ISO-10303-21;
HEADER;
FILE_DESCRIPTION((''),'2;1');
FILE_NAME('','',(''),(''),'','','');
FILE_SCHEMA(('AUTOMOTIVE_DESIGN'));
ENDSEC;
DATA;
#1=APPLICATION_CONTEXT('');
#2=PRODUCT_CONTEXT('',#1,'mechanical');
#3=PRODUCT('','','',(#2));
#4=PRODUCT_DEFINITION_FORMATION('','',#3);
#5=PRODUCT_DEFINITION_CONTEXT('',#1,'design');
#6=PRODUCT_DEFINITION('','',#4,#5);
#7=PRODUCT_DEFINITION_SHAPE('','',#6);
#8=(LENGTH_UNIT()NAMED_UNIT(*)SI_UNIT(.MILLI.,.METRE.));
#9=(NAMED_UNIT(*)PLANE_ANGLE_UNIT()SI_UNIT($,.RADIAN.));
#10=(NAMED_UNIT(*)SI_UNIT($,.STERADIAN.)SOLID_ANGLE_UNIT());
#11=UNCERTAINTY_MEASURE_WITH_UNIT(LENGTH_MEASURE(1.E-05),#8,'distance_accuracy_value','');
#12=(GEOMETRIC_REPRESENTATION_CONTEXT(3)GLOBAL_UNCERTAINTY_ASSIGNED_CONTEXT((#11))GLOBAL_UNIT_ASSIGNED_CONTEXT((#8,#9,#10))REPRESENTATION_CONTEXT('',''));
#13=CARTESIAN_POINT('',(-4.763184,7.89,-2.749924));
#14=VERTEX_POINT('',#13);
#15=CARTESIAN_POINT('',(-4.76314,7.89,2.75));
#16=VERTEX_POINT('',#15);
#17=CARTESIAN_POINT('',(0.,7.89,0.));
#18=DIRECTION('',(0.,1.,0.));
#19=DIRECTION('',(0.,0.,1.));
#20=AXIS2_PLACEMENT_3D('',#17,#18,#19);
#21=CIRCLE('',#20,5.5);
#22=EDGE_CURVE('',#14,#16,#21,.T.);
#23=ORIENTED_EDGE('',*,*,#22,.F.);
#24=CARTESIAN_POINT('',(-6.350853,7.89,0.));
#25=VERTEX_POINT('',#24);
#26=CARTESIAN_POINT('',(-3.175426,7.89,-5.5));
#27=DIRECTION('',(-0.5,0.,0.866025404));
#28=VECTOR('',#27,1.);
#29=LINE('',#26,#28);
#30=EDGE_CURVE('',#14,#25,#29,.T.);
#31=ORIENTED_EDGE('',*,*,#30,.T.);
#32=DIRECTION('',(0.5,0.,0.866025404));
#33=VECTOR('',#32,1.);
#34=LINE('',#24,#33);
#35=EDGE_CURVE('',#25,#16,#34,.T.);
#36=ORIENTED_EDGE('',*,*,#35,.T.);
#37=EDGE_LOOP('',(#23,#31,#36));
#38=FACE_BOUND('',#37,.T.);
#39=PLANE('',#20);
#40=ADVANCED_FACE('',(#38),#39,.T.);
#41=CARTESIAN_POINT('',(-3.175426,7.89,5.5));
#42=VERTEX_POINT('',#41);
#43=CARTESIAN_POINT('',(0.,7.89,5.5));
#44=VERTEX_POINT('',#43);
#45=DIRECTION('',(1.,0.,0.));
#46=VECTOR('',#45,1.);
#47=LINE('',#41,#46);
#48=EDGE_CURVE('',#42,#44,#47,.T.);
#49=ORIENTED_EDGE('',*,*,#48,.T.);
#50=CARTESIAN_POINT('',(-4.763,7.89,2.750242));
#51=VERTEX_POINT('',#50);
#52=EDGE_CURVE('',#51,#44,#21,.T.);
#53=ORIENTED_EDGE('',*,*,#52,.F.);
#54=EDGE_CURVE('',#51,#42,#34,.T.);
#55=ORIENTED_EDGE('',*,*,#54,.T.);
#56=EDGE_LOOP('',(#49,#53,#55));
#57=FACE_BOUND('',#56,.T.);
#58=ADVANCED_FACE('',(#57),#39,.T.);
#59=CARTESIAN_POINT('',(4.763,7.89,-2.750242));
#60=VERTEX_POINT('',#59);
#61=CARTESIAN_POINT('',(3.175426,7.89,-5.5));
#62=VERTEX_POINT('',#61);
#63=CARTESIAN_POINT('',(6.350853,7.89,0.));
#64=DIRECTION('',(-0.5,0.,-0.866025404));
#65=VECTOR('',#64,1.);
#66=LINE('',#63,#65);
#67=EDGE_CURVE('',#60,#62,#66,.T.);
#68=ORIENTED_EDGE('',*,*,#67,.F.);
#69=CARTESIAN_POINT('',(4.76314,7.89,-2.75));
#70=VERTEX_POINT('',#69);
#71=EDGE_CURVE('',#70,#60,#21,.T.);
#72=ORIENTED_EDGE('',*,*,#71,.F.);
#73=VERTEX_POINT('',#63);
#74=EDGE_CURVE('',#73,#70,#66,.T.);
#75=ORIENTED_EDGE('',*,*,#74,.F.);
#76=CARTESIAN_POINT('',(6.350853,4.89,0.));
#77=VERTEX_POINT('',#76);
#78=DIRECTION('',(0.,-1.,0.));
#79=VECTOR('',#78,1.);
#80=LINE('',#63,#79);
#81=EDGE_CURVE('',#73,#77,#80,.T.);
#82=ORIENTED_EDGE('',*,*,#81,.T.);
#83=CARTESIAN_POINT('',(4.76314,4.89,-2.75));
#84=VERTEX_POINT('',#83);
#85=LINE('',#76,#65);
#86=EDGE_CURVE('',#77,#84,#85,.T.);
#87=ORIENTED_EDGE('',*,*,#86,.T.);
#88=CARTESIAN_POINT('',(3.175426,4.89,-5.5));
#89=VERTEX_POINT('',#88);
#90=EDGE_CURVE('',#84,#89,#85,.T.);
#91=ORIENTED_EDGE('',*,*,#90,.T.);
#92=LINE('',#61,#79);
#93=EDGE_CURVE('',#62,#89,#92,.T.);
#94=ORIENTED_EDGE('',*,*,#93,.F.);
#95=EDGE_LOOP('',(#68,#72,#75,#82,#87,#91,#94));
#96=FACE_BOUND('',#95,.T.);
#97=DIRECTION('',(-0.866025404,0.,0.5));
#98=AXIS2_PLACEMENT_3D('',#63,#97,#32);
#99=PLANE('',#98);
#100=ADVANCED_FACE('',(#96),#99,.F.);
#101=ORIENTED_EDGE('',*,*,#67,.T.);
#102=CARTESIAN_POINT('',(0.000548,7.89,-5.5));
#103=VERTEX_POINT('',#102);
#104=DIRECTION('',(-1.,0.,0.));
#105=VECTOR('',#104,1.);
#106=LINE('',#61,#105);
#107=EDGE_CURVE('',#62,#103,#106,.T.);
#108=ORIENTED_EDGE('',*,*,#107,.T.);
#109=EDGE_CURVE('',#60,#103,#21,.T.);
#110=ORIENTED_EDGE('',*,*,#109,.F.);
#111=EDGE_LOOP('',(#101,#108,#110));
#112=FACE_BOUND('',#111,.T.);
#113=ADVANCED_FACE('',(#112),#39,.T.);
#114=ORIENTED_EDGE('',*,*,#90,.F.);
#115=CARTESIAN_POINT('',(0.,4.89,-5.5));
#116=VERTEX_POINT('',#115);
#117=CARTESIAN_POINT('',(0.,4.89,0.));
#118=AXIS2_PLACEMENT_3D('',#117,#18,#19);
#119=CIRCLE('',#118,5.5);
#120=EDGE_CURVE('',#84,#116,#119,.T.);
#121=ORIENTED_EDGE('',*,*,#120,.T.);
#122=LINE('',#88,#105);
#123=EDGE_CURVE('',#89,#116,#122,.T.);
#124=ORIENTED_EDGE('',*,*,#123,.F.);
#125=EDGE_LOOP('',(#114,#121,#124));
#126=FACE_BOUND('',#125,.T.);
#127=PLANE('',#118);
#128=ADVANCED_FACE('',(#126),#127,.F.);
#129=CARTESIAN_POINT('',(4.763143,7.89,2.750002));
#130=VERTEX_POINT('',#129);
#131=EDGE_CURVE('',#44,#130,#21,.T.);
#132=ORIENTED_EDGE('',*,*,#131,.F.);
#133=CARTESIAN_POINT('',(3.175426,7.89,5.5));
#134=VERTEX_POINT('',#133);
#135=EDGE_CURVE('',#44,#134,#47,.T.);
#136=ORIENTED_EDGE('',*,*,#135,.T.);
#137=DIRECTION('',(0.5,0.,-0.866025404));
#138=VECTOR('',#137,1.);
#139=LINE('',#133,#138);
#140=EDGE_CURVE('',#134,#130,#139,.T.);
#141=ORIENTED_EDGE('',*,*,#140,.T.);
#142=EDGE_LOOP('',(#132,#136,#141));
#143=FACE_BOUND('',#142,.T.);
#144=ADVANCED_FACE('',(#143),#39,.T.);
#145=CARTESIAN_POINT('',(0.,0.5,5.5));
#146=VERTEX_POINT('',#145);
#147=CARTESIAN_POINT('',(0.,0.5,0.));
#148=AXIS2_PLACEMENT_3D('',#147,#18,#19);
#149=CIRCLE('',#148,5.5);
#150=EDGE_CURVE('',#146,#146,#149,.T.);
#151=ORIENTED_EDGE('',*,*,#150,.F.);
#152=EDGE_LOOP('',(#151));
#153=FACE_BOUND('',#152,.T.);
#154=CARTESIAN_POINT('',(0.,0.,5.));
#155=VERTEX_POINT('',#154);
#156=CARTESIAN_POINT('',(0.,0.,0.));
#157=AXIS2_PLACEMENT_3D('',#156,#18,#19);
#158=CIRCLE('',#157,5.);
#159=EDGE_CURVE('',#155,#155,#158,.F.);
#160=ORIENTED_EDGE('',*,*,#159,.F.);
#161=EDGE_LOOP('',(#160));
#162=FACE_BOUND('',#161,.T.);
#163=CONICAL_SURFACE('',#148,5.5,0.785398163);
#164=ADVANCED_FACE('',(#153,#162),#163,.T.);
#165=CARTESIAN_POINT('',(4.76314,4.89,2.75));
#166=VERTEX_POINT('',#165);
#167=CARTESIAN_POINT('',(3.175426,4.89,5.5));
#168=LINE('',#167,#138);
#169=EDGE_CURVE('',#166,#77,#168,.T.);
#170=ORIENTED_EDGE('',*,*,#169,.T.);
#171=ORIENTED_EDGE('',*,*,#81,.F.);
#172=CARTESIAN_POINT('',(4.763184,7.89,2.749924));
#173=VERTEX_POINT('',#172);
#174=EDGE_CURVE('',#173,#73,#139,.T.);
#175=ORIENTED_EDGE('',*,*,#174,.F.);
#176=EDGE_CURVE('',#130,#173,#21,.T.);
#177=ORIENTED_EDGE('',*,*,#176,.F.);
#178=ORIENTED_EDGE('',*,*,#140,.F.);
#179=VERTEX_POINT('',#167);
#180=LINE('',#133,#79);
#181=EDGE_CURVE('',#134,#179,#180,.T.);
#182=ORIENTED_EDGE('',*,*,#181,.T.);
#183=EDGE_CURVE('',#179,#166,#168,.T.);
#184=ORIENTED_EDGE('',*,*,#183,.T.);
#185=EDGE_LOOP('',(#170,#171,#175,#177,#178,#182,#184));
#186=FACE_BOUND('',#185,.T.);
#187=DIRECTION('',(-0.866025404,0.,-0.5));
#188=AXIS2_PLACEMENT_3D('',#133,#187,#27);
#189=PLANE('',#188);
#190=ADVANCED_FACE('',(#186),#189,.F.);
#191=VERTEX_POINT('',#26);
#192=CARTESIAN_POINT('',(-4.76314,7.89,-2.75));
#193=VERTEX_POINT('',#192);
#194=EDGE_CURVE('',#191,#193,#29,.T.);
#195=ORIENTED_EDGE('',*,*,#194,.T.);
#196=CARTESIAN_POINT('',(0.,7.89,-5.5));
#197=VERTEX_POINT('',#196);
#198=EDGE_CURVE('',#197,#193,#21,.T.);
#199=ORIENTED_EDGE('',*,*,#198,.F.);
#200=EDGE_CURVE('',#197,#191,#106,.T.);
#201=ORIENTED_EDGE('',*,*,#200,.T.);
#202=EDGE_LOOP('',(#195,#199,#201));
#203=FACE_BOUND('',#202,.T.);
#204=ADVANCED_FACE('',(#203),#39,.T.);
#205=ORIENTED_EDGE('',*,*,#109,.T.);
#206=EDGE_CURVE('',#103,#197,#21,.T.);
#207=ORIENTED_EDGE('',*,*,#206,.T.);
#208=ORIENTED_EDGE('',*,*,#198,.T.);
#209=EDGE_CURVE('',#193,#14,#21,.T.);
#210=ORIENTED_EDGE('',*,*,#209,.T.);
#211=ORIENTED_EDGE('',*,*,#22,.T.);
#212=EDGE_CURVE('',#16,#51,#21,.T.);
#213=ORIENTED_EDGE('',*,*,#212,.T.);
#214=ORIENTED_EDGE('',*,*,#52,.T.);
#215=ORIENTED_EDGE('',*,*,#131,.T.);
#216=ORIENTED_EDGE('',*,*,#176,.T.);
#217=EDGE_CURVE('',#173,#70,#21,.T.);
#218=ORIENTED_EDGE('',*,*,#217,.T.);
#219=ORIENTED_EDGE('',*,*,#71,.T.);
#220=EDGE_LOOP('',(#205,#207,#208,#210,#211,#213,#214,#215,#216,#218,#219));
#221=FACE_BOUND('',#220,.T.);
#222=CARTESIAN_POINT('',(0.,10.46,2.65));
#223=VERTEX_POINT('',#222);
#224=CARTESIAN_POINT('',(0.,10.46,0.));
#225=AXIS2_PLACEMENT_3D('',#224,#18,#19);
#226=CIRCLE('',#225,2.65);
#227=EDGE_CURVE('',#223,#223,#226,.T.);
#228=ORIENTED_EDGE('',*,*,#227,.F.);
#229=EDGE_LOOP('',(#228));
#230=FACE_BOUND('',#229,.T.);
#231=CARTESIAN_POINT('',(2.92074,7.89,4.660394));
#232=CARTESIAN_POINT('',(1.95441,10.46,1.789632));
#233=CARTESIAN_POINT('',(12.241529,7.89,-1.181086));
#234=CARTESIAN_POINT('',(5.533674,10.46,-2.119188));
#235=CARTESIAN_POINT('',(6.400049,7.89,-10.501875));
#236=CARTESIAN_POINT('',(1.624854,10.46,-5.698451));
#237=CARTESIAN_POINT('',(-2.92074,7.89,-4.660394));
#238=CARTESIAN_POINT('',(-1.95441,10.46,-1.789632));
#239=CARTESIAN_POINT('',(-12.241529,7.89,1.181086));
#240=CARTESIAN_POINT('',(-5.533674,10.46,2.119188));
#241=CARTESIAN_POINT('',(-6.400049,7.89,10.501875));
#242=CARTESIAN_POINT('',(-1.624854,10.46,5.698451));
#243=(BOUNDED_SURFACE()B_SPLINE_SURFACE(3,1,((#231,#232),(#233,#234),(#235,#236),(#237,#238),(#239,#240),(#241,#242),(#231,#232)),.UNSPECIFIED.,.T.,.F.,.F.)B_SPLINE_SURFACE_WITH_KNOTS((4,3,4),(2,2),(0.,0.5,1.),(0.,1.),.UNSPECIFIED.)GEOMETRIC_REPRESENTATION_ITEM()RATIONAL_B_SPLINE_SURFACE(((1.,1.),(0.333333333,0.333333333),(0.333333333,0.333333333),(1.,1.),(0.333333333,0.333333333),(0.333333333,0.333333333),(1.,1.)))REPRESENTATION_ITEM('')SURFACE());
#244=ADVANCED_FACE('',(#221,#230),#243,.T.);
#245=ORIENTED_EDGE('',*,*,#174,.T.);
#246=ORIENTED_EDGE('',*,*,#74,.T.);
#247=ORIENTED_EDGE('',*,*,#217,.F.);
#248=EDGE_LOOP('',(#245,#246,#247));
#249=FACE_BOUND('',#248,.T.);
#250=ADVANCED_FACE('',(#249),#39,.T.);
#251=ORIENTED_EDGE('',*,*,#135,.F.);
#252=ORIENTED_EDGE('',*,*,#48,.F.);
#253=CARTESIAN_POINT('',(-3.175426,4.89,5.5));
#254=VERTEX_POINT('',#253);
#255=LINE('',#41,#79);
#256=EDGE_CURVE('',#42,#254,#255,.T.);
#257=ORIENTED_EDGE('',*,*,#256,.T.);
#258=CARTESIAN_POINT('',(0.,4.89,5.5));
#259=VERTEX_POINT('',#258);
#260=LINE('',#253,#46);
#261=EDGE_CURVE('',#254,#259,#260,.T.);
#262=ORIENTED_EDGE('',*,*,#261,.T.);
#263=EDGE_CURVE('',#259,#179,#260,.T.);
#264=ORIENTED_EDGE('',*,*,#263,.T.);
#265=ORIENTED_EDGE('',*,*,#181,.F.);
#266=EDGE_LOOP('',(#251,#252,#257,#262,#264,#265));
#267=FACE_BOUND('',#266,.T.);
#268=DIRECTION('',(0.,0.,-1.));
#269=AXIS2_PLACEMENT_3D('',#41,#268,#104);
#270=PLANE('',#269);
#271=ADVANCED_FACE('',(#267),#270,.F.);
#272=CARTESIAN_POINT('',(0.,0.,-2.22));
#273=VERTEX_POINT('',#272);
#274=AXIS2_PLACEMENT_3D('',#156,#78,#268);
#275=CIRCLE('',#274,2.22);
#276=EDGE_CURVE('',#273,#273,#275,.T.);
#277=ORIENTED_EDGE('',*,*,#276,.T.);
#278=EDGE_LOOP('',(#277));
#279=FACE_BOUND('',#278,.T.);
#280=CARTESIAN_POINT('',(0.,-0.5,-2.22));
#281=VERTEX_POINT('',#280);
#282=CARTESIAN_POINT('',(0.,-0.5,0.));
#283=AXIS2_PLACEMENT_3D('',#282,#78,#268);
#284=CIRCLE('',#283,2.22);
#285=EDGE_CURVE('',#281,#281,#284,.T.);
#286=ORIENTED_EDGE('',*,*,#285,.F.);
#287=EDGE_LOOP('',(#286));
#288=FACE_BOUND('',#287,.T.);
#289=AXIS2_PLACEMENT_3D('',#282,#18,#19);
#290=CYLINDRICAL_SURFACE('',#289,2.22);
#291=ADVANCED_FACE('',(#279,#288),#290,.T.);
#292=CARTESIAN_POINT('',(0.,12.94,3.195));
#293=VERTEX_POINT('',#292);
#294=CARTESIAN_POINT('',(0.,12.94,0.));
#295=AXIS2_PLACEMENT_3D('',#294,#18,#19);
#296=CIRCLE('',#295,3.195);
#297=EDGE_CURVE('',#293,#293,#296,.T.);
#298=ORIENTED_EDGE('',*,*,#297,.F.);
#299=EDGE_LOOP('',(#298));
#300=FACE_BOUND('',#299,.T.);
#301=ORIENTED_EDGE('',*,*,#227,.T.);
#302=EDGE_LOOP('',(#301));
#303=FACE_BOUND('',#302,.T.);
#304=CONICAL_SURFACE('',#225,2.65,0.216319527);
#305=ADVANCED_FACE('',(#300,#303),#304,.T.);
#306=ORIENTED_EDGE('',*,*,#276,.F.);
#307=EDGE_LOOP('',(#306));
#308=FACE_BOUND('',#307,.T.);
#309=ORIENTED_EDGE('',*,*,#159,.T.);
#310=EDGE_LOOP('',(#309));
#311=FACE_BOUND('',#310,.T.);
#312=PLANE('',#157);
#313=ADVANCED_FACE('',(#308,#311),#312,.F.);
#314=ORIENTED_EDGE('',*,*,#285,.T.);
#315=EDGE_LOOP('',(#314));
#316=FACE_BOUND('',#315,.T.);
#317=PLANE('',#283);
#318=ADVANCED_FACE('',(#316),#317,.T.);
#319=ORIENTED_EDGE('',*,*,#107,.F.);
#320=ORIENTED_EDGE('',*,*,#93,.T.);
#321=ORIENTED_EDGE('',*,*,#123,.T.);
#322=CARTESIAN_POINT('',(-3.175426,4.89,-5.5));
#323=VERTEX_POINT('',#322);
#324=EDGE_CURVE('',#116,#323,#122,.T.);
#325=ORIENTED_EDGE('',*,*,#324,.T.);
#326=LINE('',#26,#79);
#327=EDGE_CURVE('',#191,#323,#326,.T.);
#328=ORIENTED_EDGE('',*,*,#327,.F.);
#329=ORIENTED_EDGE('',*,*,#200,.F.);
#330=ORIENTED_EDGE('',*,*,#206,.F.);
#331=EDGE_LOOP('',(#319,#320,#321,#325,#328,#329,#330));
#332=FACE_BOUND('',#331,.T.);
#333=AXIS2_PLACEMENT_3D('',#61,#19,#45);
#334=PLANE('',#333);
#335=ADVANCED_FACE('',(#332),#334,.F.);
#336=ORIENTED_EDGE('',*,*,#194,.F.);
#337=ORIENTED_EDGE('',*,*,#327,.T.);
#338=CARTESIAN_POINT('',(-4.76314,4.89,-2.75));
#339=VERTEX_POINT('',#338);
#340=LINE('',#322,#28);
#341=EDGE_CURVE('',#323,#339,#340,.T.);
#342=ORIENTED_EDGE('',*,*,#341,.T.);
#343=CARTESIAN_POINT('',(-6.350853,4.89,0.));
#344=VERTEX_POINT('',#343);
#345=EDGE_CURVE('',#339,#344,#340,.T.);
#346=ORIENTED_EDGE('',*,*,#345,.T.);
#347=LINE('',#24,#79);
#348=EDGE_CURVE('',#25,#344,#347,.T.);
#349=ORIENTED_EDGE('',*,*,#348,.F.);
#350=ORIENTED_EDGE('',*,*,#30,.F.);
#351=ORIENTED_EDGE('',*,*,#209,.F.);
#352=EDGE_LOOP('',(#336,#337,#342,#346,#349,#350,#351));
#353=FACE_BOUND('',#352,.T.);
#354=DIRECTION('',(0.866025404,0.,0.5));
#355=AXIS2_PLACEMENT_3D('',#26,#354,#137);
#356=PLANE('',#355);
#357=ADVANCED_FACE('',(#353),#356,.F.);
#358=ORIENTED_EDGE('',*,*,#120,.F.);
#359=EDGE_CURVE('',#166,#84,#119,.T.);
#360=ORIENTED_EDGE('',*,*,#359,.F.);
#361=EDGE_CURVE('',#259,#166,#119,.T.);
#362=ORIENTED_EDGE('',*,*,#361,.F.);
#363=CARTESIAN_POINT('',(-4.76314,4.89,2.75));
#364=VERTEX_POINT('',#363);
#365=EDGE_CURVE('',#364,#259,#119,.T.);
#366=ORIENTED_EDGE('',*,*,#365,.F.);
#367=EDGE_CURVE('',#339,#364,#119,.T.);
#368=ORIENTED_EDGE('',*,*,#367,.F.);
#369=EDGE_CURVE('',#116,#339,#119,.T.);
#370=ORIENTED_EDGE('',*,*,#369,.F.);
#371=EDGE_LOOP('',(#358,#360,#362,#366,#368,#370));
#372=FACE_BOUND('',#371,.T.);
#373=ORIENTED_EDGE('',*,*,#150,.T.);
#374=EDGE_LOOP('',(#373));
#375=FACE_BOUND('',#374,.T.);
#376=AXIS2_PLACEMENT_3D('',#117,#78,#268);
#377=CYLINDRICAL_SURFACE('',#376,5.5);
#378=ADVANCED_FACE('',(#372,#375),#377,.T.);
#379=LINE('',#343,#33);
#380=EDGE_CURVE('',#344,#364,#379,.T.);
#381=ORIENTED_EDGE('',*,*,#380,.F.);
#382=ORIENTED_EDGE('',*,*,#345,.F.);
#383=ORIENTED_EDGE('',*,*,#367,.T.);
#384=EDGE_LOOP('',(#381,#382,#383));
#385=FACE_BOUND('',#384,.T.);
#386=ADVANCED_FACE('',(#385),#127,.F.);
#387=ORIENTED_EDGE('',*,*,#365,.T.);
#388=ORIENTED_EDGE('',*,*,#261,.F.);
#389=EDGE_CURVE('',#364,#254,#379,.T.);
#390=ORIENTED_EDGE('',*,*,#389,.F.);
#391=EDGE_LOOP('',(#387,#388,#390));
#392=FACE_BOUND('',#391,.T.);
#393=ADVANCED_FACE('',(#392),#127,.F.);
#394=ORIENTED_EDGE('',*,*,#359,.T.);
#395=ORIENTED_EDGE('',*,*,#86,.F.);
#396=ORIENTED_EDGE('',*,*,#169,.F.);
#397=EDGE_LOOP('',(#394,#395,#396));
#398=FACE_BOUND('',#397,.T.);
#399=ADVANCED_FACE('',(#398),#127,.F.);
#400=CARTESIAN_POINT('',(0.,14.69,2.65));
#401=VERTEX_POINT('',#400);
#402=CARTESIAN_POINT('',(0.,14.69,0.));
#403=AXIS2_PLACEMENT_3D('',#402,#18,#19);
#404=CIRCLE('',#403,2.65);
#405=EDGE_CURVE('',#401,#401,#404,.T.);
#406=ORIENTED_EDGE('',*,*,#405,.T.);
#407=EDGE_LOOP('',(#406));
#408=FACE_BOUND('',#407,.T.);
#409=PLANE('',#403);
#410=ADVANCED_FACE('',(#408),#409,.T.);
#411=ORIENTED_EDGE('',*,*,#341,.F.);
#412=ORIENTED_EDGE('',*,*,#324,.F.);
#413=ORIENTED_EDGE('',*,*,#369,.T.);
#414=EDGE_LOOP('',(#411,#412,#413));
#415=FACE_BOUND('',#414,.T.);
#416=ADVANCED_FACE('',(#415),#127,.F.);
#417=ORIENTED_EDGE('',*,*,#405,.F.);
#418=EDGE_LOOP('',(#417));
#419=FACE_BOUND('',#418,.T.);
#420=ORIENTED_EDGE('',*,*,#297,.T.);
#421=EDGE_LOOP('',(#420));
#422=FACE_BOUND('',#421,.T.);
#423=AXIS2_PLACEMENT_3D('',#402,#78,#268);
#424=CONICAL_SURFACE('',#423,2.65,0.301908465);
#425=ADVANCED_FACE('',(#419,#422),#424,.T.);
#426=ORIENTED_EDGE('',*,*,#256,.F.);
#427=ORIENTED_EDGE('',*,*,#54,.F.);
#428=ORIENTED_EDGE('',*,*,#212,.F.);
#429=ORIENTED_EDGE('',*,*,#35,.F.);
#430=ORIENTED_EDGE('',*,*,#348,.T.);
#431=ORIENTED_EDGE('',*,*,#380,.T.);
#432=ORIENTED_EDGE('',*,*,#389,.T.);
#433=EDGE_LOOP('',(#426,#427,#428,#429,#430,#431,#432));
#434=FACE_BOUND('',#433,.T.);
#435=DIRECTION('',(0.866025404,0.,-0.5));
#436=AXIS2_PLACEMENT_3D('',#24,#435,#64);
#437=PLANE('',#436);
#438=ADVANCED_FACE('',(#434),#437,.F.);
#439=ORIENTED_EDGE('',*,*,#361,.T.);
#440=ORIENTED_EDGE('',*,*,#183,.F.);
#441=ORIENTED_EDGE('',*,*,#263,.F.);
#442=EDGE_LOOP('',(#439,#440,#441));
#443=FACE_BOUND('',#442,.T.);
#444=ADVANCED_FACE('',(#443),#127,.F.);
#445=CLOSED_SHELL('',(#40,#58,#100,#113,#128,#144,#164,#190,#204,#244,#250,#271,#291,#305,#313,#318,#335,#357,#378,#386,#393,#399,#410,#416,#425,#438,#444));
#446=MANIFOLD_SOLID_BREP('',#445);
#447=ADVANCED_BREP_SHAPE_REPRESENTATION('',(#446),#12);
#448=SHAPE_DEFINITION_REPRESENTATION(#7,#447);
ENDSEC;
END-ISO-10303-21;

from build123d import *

# Parameters (mm, degrees)
SKETCH1_R           = 5.5
BOSS_EXTRUDE1_DEPTH = 4.89
CHAMFER1_SIZE       = 0.5
SKETCH2_R           = 2.22
BOSS_EXTRUDE2_DEPTH = 0.5
BOSS_EXTRUDE3_DEPTH = 3
SKETCH4_R           = 2.65
BOSS_EXTRUDE4_DEPTH = 2.57
SKETCH8_R           = 3.195
SKETCH5_R           = 2.65


with BuildPart() as part:
    # Sketch1 → Boss-Extrude1 (new body)
    with BuildSketch(Plane(origin=(0, 0, 0), x_dir=(1, 0, 0), z_dir=(0, 1, 0))):
        with Locations(Location((0, 0, 0), (0, 0, 270))):
            Circle(SKETCH1_R)
    extrude(amount=BOSS_EXTRUDE1_DEPTH)

    # Chamfer1
    chamfer1_edges = [part.edges().sort_by_distance(p)[0] for p in [
        (0, 0, -5.5),
    ]]
    chamfer(chamfer1_edges, length=CHAMFER1_SIZE)

    # Sketch2 → Boss-Extrude2 (add)
    with BuildSketch(Plane(origin=(0, 0, 0), x_dir=(-1, 0, 0), z_dir=(0, -1, 0))):
        with Locations(Location((0, 0, 0), (0, 0, 90))):
            Circle(SKETCH2_R)
    extrude(amount=BOSS_EXTRUDE2_DEPTH)

    # Sketch3 → Boss-Extrude3 (add)
    with BuildSketch(Plane(origin=(0, 4.89, 0), x_dir=(1, 0, 0), z_dir=(0, 1, 0))):
        Polygon((-6.350852961, 0), (-3.175426481, -5.5), (3.175426481, -5.5), (6.350852961, 0), (3.175426481, 5.5), (-3.175426481, 5.5), align=None)
    extrude(amount=BOSS_EXTRUDE3_DEPTH)

    # Sketch4 → Boss-Extrude4 (add)
    with BuildSketch(Plane(origin=(0, 7.89, 0), x_dir=(1, 0, 0), z_dir=(0, 1, 0))):
        with Locations(Location((0, 0, 0), (0, 0, 270))):
            Circle(SKETCH4_R)
    extrude(amount=BOSS_EXTRUDE4_DEPTH)

    # Loft1: read off the stored shape, not the designer's step
    # Loft1: loft between two sections, ruled curve by curve
    loft1_from = [
        Edge.make_bspline([(2.920740302, 7.89, 4.660394413), (12.241529129, 7.89, -1.181086191), (6.400048524, 7.89, -10.501875018), (-2.920740302, 7.89, -4.660394413), (-12.241529129, 7.89, 1.181086191), (-6.400048524, 7.89, 10.501875018), (2.920740302, 7.89, 4.660394413)], [0, 0, 0, 0, 0.5, 0.5, 0.5, 1, 1, 1, 1], 3, [1, 0.333333333, 0.333333333, 1, 0.333333333, 0.333333333, 1]),
    ]
    loft1_to = [
        Edge.make_bspline([(1.954409761, 10.46, 1.789631942), (5.533673644, 10.46, -2.11918758), (1.624854122, 10.46, -5.698451464), (-1.954409761, 10.46, -1.789631942), (-5.533673644, 10.46, 2.11918758), (-1.624854122, 10.46, 5.698451464), (1.954409761, 10.46, 1.789631942)], [0, 0, 0, 0, 0.5, 0.5, 0.5, 1, 1, 1, 1], 3, [1, 0.333333333, 0.333333333, 1, 0.333333333, 0.333333333, 1]),
    ]
    loft1 = Solid(Shell([*[Face.make_surface_from_curves(loft1_from[k], loft1_to[k]) for k in range(1)], Face(Wire(loft1_from)), Face(Wire(loft1_to))]))
    add(loft1)

    # Sketch8 → section 1 of loft2
    with BuildSketch(Plane(origin=(0, 12.94, 0), x_dir=(1, 0, 0), z_dir=(0, 1, 0)), mode=Mode.PRIVATE) as loft2_s1:
        Circle(SKETCH8_R)
    # loft up to a face of the part (loft2)
    loft([Face(Wire([part.edges().sort_by_distance((-0.033300005, 10.46, -2.649790767))[0]])), loft2_s1.sketch])

    # Sketch5 → section 1 of loft3
    with BuildSketch(Plane(origin=(0, 14.69, 0), x_dir=(1, 0, 0), z_dir=(0, 1, 0)), mode=Mode.PRIVATE) as loft3_s1:
        Circle(SKETCH5_R)
    # loft up to a face of the part (loft3)
    loft([Face(Wire([part.edges().sort_by_distance((-0.040148497, 12.94, -3.194747736))[0]])), loft3_s1.sketch])


solid = part.part
